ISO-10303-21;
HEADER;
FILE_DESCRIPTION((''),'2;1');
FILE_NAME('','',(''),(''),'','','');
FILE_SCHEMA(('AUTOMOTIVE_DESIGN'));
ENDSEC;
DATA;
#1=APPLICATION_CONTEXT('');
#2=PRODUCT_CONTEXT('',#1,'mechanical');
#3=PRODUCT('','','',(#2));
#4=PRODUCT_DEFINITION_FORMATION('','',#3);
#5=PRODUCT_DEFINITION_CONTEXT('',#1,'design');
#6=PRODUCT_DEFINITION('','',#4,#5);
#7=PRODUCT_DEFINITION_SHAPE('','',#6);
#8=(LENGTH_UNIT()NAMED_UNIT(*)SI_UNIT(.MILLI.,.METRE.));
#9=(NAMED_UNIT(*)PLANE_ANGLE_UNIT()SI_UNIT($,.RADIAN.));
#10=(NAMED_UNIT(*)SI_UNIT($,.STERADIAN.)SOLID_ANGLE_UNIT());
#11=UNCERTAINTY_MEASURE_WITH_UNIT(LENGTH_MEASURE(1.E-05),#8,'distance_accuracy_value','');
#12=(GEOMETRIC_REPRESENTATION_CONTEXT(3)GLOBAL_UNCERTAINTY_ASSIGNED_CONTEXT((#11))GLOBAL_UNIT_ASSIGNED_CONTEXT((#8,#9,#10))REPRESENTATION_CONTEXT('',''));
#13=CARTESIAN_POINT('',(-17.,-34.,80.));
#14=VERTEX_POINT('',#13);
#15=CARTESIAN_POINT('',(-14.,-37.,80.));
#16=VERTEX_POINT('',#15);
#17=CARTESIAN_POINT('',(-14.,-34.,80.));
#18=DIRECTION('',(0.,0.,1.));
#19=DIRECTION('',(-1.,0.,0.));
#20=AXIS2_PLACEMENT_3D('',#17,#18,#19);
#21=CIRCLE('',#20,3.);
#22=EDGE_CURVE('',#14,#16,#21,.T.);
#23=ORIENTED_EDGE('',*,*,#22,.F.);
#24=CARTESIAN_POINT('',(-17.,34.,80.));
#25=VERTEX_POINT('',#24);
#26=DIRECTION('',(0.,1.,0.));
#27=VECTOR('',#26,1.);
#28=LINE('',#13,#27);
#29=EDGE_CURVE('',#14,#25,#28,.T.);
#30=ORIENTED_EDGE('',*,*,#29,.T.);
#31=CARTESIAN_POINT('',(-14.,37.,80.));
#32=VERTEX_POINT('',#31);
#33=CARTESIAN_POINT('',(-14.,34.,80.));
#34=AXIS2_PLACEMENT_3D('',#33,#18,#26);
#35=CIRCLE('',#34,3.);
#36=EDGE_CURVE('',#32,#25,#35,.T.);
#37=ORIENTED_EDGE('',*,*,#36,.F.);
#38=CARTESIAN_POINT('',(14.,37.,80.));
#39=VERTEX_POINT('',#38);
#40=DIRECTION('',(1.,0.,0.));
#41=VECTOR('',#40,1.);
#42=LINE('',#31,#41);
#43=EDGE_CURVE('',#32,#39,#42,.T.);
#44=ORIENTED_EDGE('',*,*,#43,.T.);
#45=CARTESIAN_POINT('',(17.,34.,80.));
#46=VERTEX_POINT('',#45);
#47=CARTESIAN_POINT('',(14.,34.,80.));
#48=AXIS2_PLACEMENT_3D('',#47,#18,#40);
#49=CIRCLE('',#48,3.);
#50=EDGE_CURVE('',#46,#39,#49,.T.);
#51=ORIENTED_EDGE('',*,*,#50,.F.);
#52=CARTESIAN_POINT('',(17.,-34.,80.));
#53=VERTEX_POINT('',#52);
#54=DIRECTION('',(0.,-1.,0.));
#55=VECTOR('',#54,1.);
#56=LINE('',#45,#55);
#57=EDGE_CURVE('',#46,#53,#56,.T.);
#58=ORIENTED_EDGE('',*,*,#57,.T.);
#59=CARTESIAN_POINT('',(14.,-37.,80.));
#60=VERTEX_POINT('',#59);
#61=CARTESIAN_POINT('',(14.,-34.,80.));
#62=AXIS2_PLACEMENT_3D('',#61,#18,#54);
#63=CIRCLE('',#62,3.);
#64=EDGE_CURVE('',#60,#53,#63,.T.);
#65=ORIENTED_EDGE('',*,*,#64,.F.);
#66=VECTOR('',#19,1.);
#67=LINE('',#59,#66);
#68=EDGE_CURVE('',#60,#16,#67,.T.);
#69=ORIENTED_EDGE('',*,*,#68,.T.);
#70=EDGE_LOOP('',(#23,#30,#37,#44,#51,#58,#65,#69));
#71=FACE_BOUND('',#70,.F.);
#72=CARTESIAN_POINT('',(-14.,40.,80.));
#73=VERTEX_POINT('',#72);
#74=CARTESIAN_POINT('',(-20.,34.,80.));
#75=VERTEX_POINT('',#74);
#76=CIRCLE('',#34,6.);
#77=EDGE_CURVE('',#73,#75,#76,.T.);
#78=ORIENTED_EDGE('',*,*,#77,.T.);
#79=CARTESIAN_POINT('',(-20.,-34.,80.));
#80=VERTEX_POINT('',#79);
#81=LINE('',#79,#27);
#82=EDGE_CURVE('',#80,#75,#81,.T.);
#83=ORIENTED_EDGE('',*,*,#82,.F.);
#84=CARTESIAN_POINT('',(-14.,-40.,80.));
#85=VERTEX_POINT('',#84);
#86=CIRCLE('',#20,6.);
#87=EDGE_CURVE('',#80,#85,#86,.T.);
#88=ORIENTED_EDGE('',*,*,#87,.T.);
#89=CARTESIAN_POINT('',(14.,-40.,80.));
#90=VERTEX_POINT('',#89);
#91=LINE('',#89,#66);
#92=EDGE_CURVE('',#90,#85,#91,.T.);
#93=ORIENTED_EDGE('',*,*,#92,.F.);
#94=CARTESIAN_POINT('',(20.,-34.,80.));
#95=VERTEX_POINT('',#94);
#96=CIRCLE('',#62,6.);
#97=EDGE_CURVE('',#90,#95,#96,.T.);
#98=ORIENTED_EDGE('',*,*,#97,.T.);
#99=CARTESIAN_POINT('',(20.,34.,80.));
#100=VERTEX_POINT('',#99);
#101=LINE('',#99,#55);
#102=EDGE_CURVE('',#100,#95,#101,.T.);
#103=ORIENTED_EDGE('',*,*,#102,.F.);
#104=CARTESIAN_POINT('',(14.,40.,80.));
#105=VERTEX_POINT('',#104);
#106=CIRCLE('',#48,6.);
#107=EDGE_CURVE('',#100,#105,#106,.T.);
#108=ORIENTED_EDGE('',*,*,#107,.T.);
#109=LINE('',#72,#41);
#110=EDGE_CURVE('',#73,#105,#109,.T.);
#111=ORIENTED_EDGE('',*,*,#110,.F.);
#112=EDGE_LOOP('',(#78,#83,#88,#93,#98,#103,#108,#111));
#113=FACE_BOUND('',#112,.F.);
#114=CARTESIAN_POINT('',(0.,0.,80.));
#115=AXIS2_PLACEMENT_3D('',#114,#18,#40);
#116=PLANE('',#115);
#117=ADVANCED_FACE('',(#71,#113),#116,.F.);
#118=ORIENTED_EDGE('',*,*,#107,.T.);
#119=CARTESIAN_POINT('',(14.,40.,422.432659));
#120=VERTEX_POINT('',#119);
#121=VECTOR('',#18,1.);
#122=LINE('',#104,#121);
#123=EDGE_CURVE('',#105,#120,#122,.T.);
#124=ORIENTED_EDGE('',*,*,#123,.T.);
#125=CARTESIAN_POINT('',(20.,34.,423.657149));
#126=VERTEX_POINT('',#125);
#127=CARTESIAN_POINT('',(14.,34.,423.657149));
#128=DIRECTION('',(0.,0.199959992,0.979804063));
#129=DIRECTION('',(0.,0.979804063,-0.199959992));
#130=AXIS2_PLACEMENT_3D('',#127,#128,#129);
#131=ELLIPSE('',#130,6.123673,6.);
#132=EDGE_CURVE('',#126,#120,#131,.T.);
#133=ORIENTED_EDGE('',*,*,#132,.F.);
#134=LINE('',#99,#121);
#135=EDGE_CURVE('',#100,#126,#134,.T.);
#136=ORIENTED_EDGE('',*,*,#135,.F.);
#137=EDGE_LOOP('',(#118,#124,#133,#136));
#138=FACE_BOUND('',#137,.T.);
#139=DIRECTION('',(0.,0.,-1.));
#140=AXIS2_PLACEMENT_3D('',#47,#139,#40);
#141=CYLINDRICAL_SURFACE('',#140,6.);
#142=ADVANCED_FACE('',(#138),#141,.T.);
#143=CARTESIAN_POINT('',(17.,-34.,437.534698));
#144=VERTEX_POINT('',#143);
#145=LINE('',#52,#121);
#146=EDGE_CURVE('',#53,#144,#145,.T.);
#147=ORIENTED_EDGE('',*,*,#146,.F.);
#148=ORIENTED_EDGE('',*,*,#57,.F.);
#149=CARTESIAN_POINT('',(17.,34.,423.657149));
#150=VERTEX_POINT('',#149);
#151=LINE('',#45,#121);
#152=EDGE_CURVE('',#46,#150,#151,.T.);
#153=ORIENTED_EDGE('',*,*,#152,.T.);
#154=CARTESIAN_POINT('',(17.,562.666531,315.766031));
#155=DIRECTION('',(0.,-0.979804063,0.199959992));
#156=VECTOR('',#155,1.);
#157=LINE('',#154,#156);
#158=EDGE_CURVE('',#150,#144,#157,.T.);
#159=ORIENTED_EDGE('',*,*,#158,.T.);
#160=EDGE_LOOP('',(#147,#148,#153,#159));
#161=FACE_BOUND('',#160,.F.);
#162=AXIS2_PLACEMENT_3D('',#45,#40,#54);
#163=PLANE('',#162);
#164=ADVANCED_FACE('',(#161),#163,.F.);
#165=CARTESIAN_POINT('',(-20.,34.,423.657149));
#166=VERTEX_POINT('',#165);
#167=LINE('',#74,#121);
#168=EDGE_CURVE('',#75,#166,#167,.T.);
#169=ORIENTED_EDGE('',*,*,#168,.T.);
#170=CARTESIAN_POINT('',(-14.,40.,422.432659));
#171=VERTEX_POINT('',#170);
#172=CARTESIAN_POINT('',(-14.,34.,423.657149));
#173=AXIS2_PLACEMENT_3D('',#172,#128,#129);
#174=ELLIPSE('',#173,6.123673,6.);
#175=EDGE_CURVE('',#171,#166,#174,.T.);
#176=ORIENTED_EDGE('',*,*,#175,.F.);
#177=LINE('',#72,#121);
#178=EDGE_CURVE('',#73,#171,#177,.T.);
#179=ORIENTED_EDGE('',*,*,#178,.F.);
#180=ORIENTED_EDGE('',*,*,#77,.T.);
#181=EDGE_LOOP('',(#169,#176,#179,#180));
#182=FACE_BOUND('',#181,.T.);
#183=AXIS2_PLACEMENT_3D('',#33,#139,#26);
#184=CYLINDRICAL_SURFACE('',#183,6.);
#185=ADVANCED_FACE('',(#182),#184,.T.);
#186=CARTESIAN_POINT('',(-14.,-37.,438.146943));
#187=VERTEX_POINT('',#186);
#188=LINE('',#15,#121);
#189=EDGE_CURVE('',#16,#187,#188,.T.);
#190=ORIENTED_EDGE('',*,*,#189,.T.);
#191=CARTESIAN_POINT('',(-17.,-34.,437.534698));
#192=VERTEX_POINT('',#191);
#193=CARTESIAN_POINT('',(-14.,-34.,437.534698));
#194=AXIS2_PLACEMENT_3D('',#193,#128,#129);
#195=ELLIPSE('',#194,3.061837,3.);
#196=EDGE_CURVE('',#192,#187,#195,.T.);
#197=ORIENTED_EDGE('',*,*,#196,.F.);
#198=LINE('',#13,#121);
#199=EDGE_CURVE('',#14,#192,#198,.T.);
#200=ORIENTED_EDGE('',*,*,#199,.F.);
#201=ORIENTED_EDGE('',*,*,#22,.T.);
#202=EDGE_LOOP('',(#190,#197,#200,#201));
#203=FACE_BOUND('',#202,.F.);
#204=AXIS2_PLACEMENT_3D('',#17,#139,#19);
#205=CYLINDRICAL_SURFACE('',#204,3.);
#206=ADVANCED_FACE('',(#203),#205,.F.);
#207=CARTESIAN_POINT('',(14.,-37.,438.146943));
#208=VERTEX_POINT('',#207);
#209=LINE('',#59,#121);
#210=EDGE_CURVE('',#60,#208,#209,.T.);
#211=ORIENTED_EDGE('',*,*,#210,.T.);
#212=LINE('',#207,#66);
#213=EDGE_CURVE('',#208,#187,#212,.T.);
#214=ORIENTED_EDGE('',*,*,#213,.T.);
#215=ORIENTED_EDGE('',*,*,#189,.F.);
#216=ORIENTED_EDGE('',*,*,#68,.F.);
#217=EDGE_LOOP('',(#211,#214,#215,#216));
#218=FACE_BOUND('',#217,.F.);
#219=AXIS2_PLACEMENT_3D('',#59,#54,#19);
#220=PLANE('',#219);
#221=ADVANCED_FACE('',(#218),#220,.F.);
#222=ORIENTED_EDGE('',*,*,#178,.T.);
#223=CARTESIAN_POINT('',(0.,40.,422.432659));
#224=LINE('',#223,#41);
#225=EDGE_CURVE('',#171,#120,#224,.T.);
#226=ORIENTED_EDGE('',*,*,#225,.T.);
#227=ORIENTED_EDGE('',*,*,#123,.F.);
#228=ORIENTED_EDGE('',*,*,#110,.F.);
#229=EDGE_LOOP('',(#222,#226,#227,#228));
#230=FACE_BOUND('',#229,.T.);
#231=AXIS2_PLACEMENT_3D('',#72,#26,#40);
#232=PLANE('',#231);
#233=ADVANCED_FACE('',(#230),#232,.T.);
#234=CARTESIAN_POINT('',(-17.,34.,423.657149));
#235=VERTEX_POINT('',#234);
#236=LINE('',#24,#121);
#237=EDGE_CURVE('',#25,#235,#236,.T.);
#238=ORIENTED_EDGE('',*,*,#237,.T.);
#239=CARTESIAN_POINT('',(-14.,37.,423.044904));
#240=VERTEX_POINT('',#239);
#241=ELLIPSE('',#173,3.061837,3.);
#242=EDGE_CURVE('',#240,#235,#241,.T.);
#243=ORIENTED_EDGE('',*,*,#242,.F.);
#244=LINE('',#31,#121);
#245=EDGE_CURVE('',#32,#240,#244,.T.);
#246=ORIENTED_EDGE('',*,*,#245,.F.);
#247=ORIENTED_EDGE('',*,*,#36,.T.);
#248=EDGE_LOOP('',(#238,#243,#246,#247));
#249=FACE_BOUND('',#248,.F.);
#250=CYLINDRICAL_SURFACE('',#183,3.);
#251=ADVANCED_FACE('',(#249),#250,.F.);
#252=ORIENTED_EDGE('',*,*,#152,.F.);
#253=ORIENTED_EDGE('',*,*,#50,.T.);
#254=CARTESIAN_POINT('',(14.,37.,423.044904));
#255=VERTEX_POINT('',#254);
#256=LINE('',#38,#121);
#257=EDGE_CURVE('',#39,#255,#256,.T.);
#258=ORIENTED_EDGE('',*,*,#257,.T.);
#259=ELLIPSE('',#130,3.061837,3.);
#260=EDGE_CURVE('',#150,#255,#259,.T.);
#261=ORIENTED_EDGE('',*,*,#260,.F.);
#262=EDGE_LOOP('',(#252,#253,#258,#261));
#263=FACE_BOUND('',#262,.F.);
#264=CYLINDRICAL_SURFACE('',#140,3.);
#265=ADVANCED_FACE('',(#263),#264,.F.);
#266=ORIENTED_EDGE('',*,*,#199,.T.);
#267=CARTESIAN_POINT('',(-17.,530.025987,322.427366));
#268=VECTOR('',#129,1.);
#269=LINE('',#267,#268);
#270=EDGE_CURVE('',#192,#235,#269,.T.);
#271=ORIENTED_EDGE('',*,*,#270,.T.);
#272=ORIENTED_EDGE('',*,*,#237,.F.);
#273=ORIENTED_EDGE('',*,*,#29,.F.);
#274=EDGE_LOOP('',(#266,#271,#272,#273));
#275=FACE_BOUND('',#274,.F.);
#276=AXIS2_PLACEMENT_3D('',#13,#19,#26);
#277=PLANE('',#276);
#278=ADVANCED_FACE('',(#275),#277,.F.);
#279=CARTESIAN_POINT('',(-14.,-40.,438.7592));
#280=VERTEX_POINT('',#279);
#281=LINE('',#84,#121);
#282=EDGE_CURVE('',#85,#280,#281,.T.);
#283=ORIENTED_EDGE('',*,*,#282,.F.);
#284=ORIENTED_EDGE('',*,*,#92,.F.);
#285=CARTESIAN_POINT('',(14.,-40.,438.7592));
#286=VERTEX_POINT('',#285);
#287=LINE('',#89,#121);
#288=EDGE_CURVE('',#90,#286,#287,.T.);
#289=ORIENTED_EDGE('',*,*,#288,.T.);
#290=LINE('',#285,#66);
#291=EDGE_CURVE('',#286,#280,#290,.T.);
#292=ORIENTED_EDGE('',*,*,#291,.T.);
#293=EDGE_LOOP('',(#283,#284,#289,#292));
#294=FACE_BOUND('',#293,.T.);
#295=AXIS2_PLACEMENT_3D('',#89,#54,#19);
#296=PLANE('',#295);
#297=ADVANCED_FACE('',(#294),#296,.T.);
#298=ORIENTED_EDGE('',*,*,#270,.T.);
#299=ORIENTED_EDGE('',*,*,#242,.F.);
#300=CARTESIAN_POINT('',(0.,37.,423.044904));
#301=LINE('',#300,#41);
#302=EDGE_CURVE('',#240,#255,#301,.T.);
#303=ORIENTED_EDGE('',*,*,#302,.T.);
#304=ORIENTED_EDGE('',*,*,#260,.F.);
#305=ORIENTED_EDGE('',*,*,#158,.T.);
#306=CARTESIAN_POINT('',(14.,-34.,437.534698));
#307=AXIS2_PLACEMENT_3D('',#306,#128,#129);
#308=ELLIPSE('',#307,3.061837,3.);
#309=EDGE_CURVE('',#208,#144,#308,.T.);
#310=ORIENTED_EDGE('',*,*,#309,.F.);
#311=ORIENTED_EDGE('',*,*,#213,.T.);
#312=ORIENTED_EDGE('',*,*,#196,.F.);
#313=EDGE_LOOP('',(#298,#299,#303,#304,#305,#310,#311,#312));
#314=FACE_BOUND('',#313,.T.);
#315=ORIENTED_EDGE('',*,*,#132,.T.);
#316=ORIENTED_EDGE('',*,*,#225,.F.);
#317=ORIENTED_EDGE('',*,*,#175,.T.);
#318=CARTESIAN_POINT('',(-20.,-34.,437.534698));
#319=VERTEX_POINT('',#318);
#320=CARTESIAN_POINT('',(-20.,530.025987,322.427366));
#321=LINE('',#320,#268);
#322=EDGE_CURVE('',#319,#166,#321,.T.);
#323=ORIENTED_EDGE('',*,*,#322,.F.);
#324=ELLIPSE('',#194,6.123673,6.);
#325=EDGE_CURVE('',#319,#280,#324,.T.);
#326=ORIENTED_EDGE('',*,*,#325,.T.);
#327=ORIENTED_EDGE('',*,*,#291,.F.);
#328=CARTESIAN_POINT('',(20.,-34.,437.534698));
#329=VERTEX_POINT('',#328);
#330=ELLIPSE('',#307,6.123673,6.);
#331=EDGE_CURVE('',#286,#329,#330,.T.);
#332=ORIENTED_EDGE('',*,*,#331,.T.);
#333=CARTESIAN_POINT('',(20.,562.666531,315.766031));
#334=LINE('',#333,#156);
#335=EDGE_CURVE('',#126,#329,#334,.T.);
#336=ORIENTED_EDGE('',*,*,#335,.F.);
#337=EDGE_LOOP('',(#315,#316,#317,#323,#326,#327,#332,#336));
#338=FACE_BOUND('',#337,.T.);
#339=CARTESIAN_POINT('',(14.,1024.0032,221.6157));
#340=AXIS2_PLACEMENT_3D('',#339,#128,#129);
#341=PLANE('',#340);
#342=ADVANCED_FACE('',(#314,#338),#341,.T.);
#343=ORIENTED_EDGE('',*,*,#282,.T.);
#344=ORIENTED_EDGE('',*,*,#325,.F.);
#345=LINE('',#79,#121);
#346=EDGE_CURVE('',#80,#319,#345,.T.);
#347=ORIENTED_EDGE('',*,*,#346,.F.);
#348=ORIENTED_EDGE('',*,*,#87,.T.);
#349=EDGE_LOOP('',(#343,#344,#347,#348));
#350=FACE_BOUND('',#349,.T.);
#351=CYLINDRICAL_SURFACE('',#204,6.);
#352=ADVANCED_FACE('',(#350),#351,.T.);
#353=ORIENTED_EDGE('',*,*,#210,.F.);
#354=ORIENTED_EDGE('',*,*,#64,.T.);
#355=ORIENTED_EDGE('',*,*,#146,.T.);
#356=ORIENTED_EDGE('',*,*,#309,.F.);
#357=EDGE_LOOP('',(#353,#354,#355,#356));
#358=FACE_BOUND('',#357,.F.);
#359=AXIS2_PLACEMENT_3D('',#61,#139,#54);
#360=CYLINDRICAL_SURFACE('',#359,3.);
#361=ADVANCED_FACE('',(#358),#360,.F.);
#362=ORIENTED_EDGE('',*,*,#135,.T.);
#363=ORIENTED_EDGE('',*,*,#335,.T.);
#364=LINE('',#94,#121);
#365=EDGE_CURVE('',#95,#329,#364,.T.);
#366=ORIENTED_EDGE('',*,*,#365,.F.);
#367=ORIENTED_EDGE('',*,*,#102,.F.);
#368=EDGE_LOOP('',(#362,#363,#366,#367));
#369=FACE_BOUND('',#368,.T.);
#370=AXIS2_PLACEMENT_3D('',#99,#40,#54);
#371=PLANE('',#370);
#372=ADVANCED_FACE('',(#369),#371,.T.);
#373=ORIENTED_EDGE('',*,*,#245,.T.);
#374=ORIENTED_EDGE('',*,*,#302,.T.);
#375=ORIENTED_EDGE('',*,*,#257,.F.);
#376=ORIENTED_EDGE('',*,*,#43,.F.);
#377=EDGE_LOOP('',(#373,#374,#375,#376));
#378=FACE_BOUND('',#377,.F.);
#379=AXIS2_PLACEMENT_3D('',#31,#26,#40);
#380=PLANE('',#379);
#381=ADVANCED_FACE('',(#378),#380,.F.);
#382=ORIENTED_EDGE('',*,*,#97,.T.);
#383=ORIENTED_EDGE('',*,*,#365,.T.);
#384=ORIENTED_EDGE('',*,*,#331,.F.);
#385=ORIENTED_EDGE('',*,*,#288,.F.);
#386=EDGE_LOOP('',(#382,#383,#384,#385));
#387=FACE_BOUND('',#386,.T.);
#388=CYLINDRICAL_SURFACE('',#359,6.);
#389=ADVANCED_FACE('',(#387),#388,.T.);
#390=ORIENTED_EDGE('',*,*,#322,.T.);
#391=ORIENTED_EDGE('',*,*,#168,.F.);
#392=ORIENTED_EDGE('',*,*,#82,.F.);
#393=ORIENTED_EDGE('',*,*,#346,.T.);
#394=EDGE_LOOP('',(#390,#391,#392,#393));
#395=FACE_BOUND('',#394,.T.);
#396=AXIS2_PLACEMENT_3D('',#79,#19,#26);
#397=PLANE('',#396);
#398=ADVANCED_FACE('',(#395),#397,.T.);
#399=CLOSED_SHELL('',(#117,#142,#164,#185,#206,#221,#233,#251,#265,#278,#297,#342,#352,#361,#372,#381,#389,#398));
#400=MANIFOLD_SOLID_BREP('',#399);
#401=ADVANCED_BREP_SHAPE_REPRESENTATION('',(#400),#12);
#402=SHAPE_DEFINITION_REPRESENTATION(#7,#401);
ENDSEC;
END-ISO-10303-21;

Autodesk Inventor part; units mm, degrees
ref_plane "Start Plane" through (0, 0, 80) normal (0, 0, 1) x (1, 0, 0)
ref_plane "End Plane" through (0, 0, 438.7592) normal (0, 0, 1) x (1, 0, 0)
sketch "Sketch" plane through (0, 0, 0) normal (0, 0, 1) x (1, 0, 0)
  line L0 (-20, -34) -> (-20, 34)
  line L1 (-14, 40) -> (14, 40)
  line L2 (20, 34) -> (20, -34)
  line L3 (14, -40) -> (-14, -40)
  arc A0 (-20, -34) -> (-14, -40) centre (-14, -34) ccw
  arc A1 (20, 34) -> (14, 40) centre (14, 34) ccw
  arc A2 (-14, 40) -> (-20, 34) centre (-14, 34) ccw
  arc A3 (14, -40) -> (20, -34) centre (14, -34) ccw
  arc A4 (-14, 37) -> (-17, 34) centre (-14, 34) ccw
  line L4 (-14, 37) -> (14, 37)
  arc A5 (17, 34) -> (14, 37) centre (14, 34) ccw
  line L5 (17, 34) -> (17, -34)
  arc A6 (14, -37) -> (17, -34) centre (14, -34) ccw
  line L6 (14, -37) -> (-14, -37)
  arc A7 (-17, -34) -> (-14, -37) centre (-14, -34) ccw
  line L7 (-17, -34) -> (-17, 34)
  line L8 (0, 57.7397) -> (0, -57.7397) construction
  line L9 (-29.7397, 0) -> (29.7397, 0) construction
  dimension "d7" = 6
  dimension "d9" = 40
  dimension "d11" = 80
  dimension "d12" = 3
  dimension "d15" = 20
  dimension "d16" = 40
extrude "Body" add sketch "Sketch" along normal up to surface (358.7592 mm away) from surface at 80
sketch "Sketch3" plane through (0, 0, 0) normal (0, 0, 1) x (1, 0, 0)
  line L0 (0, 0) -> (10, 0)
ref_plane "Work Plane3" through (0, 0, 0) normal (0, -1, 0) x (1, 0, 0)
ref_plane "Work Plane4" through (14, 1024.0032, 221.6157) normal (0, 0.19996, 0.9798041) x (1, 0, 0)
split "Split1" plane through (14, 1024.0032, 221.6157) removes the side toward (0, 0.19996, 0.9798041)
sketch "Sketch4" plane through (0, 0, 0) normal (0, -1, 0) x (1, 0, 0)
  line L0 (-2, 80) -> (12, 80) projected
  line L1 (-2, 438.7592) -> (12, 438.7592) projected
  dimension "d18" = 358.7592
equation "\"d7\" = G_IR"
equation "\"d9\" = G_W"
equation "\"d11\" = G_H"
equation "\"d12\" = G_T"
equation "\"d15\" = 0.5 * d9"
equation "\"d16\" = 0.5 * d11"
equation "\"d3\" = G_L"
equation "\"G_W\" = 40"
equation "\"G_H\" = 80"
equation "\"G_T\" = 3"
equation "\"G_IR\" = 6"
equation "\"G_L\" = d18"
equation "\"G_OFFSET_END\" = -65.32245"
equation "\"d14\" = G_OFFSET_END + B_L"
equation "\"B_L\" = 504.08163"
properties part number "ISO 10799-2 - 80x40x3 - 358,76" material "Steel, Mild"
